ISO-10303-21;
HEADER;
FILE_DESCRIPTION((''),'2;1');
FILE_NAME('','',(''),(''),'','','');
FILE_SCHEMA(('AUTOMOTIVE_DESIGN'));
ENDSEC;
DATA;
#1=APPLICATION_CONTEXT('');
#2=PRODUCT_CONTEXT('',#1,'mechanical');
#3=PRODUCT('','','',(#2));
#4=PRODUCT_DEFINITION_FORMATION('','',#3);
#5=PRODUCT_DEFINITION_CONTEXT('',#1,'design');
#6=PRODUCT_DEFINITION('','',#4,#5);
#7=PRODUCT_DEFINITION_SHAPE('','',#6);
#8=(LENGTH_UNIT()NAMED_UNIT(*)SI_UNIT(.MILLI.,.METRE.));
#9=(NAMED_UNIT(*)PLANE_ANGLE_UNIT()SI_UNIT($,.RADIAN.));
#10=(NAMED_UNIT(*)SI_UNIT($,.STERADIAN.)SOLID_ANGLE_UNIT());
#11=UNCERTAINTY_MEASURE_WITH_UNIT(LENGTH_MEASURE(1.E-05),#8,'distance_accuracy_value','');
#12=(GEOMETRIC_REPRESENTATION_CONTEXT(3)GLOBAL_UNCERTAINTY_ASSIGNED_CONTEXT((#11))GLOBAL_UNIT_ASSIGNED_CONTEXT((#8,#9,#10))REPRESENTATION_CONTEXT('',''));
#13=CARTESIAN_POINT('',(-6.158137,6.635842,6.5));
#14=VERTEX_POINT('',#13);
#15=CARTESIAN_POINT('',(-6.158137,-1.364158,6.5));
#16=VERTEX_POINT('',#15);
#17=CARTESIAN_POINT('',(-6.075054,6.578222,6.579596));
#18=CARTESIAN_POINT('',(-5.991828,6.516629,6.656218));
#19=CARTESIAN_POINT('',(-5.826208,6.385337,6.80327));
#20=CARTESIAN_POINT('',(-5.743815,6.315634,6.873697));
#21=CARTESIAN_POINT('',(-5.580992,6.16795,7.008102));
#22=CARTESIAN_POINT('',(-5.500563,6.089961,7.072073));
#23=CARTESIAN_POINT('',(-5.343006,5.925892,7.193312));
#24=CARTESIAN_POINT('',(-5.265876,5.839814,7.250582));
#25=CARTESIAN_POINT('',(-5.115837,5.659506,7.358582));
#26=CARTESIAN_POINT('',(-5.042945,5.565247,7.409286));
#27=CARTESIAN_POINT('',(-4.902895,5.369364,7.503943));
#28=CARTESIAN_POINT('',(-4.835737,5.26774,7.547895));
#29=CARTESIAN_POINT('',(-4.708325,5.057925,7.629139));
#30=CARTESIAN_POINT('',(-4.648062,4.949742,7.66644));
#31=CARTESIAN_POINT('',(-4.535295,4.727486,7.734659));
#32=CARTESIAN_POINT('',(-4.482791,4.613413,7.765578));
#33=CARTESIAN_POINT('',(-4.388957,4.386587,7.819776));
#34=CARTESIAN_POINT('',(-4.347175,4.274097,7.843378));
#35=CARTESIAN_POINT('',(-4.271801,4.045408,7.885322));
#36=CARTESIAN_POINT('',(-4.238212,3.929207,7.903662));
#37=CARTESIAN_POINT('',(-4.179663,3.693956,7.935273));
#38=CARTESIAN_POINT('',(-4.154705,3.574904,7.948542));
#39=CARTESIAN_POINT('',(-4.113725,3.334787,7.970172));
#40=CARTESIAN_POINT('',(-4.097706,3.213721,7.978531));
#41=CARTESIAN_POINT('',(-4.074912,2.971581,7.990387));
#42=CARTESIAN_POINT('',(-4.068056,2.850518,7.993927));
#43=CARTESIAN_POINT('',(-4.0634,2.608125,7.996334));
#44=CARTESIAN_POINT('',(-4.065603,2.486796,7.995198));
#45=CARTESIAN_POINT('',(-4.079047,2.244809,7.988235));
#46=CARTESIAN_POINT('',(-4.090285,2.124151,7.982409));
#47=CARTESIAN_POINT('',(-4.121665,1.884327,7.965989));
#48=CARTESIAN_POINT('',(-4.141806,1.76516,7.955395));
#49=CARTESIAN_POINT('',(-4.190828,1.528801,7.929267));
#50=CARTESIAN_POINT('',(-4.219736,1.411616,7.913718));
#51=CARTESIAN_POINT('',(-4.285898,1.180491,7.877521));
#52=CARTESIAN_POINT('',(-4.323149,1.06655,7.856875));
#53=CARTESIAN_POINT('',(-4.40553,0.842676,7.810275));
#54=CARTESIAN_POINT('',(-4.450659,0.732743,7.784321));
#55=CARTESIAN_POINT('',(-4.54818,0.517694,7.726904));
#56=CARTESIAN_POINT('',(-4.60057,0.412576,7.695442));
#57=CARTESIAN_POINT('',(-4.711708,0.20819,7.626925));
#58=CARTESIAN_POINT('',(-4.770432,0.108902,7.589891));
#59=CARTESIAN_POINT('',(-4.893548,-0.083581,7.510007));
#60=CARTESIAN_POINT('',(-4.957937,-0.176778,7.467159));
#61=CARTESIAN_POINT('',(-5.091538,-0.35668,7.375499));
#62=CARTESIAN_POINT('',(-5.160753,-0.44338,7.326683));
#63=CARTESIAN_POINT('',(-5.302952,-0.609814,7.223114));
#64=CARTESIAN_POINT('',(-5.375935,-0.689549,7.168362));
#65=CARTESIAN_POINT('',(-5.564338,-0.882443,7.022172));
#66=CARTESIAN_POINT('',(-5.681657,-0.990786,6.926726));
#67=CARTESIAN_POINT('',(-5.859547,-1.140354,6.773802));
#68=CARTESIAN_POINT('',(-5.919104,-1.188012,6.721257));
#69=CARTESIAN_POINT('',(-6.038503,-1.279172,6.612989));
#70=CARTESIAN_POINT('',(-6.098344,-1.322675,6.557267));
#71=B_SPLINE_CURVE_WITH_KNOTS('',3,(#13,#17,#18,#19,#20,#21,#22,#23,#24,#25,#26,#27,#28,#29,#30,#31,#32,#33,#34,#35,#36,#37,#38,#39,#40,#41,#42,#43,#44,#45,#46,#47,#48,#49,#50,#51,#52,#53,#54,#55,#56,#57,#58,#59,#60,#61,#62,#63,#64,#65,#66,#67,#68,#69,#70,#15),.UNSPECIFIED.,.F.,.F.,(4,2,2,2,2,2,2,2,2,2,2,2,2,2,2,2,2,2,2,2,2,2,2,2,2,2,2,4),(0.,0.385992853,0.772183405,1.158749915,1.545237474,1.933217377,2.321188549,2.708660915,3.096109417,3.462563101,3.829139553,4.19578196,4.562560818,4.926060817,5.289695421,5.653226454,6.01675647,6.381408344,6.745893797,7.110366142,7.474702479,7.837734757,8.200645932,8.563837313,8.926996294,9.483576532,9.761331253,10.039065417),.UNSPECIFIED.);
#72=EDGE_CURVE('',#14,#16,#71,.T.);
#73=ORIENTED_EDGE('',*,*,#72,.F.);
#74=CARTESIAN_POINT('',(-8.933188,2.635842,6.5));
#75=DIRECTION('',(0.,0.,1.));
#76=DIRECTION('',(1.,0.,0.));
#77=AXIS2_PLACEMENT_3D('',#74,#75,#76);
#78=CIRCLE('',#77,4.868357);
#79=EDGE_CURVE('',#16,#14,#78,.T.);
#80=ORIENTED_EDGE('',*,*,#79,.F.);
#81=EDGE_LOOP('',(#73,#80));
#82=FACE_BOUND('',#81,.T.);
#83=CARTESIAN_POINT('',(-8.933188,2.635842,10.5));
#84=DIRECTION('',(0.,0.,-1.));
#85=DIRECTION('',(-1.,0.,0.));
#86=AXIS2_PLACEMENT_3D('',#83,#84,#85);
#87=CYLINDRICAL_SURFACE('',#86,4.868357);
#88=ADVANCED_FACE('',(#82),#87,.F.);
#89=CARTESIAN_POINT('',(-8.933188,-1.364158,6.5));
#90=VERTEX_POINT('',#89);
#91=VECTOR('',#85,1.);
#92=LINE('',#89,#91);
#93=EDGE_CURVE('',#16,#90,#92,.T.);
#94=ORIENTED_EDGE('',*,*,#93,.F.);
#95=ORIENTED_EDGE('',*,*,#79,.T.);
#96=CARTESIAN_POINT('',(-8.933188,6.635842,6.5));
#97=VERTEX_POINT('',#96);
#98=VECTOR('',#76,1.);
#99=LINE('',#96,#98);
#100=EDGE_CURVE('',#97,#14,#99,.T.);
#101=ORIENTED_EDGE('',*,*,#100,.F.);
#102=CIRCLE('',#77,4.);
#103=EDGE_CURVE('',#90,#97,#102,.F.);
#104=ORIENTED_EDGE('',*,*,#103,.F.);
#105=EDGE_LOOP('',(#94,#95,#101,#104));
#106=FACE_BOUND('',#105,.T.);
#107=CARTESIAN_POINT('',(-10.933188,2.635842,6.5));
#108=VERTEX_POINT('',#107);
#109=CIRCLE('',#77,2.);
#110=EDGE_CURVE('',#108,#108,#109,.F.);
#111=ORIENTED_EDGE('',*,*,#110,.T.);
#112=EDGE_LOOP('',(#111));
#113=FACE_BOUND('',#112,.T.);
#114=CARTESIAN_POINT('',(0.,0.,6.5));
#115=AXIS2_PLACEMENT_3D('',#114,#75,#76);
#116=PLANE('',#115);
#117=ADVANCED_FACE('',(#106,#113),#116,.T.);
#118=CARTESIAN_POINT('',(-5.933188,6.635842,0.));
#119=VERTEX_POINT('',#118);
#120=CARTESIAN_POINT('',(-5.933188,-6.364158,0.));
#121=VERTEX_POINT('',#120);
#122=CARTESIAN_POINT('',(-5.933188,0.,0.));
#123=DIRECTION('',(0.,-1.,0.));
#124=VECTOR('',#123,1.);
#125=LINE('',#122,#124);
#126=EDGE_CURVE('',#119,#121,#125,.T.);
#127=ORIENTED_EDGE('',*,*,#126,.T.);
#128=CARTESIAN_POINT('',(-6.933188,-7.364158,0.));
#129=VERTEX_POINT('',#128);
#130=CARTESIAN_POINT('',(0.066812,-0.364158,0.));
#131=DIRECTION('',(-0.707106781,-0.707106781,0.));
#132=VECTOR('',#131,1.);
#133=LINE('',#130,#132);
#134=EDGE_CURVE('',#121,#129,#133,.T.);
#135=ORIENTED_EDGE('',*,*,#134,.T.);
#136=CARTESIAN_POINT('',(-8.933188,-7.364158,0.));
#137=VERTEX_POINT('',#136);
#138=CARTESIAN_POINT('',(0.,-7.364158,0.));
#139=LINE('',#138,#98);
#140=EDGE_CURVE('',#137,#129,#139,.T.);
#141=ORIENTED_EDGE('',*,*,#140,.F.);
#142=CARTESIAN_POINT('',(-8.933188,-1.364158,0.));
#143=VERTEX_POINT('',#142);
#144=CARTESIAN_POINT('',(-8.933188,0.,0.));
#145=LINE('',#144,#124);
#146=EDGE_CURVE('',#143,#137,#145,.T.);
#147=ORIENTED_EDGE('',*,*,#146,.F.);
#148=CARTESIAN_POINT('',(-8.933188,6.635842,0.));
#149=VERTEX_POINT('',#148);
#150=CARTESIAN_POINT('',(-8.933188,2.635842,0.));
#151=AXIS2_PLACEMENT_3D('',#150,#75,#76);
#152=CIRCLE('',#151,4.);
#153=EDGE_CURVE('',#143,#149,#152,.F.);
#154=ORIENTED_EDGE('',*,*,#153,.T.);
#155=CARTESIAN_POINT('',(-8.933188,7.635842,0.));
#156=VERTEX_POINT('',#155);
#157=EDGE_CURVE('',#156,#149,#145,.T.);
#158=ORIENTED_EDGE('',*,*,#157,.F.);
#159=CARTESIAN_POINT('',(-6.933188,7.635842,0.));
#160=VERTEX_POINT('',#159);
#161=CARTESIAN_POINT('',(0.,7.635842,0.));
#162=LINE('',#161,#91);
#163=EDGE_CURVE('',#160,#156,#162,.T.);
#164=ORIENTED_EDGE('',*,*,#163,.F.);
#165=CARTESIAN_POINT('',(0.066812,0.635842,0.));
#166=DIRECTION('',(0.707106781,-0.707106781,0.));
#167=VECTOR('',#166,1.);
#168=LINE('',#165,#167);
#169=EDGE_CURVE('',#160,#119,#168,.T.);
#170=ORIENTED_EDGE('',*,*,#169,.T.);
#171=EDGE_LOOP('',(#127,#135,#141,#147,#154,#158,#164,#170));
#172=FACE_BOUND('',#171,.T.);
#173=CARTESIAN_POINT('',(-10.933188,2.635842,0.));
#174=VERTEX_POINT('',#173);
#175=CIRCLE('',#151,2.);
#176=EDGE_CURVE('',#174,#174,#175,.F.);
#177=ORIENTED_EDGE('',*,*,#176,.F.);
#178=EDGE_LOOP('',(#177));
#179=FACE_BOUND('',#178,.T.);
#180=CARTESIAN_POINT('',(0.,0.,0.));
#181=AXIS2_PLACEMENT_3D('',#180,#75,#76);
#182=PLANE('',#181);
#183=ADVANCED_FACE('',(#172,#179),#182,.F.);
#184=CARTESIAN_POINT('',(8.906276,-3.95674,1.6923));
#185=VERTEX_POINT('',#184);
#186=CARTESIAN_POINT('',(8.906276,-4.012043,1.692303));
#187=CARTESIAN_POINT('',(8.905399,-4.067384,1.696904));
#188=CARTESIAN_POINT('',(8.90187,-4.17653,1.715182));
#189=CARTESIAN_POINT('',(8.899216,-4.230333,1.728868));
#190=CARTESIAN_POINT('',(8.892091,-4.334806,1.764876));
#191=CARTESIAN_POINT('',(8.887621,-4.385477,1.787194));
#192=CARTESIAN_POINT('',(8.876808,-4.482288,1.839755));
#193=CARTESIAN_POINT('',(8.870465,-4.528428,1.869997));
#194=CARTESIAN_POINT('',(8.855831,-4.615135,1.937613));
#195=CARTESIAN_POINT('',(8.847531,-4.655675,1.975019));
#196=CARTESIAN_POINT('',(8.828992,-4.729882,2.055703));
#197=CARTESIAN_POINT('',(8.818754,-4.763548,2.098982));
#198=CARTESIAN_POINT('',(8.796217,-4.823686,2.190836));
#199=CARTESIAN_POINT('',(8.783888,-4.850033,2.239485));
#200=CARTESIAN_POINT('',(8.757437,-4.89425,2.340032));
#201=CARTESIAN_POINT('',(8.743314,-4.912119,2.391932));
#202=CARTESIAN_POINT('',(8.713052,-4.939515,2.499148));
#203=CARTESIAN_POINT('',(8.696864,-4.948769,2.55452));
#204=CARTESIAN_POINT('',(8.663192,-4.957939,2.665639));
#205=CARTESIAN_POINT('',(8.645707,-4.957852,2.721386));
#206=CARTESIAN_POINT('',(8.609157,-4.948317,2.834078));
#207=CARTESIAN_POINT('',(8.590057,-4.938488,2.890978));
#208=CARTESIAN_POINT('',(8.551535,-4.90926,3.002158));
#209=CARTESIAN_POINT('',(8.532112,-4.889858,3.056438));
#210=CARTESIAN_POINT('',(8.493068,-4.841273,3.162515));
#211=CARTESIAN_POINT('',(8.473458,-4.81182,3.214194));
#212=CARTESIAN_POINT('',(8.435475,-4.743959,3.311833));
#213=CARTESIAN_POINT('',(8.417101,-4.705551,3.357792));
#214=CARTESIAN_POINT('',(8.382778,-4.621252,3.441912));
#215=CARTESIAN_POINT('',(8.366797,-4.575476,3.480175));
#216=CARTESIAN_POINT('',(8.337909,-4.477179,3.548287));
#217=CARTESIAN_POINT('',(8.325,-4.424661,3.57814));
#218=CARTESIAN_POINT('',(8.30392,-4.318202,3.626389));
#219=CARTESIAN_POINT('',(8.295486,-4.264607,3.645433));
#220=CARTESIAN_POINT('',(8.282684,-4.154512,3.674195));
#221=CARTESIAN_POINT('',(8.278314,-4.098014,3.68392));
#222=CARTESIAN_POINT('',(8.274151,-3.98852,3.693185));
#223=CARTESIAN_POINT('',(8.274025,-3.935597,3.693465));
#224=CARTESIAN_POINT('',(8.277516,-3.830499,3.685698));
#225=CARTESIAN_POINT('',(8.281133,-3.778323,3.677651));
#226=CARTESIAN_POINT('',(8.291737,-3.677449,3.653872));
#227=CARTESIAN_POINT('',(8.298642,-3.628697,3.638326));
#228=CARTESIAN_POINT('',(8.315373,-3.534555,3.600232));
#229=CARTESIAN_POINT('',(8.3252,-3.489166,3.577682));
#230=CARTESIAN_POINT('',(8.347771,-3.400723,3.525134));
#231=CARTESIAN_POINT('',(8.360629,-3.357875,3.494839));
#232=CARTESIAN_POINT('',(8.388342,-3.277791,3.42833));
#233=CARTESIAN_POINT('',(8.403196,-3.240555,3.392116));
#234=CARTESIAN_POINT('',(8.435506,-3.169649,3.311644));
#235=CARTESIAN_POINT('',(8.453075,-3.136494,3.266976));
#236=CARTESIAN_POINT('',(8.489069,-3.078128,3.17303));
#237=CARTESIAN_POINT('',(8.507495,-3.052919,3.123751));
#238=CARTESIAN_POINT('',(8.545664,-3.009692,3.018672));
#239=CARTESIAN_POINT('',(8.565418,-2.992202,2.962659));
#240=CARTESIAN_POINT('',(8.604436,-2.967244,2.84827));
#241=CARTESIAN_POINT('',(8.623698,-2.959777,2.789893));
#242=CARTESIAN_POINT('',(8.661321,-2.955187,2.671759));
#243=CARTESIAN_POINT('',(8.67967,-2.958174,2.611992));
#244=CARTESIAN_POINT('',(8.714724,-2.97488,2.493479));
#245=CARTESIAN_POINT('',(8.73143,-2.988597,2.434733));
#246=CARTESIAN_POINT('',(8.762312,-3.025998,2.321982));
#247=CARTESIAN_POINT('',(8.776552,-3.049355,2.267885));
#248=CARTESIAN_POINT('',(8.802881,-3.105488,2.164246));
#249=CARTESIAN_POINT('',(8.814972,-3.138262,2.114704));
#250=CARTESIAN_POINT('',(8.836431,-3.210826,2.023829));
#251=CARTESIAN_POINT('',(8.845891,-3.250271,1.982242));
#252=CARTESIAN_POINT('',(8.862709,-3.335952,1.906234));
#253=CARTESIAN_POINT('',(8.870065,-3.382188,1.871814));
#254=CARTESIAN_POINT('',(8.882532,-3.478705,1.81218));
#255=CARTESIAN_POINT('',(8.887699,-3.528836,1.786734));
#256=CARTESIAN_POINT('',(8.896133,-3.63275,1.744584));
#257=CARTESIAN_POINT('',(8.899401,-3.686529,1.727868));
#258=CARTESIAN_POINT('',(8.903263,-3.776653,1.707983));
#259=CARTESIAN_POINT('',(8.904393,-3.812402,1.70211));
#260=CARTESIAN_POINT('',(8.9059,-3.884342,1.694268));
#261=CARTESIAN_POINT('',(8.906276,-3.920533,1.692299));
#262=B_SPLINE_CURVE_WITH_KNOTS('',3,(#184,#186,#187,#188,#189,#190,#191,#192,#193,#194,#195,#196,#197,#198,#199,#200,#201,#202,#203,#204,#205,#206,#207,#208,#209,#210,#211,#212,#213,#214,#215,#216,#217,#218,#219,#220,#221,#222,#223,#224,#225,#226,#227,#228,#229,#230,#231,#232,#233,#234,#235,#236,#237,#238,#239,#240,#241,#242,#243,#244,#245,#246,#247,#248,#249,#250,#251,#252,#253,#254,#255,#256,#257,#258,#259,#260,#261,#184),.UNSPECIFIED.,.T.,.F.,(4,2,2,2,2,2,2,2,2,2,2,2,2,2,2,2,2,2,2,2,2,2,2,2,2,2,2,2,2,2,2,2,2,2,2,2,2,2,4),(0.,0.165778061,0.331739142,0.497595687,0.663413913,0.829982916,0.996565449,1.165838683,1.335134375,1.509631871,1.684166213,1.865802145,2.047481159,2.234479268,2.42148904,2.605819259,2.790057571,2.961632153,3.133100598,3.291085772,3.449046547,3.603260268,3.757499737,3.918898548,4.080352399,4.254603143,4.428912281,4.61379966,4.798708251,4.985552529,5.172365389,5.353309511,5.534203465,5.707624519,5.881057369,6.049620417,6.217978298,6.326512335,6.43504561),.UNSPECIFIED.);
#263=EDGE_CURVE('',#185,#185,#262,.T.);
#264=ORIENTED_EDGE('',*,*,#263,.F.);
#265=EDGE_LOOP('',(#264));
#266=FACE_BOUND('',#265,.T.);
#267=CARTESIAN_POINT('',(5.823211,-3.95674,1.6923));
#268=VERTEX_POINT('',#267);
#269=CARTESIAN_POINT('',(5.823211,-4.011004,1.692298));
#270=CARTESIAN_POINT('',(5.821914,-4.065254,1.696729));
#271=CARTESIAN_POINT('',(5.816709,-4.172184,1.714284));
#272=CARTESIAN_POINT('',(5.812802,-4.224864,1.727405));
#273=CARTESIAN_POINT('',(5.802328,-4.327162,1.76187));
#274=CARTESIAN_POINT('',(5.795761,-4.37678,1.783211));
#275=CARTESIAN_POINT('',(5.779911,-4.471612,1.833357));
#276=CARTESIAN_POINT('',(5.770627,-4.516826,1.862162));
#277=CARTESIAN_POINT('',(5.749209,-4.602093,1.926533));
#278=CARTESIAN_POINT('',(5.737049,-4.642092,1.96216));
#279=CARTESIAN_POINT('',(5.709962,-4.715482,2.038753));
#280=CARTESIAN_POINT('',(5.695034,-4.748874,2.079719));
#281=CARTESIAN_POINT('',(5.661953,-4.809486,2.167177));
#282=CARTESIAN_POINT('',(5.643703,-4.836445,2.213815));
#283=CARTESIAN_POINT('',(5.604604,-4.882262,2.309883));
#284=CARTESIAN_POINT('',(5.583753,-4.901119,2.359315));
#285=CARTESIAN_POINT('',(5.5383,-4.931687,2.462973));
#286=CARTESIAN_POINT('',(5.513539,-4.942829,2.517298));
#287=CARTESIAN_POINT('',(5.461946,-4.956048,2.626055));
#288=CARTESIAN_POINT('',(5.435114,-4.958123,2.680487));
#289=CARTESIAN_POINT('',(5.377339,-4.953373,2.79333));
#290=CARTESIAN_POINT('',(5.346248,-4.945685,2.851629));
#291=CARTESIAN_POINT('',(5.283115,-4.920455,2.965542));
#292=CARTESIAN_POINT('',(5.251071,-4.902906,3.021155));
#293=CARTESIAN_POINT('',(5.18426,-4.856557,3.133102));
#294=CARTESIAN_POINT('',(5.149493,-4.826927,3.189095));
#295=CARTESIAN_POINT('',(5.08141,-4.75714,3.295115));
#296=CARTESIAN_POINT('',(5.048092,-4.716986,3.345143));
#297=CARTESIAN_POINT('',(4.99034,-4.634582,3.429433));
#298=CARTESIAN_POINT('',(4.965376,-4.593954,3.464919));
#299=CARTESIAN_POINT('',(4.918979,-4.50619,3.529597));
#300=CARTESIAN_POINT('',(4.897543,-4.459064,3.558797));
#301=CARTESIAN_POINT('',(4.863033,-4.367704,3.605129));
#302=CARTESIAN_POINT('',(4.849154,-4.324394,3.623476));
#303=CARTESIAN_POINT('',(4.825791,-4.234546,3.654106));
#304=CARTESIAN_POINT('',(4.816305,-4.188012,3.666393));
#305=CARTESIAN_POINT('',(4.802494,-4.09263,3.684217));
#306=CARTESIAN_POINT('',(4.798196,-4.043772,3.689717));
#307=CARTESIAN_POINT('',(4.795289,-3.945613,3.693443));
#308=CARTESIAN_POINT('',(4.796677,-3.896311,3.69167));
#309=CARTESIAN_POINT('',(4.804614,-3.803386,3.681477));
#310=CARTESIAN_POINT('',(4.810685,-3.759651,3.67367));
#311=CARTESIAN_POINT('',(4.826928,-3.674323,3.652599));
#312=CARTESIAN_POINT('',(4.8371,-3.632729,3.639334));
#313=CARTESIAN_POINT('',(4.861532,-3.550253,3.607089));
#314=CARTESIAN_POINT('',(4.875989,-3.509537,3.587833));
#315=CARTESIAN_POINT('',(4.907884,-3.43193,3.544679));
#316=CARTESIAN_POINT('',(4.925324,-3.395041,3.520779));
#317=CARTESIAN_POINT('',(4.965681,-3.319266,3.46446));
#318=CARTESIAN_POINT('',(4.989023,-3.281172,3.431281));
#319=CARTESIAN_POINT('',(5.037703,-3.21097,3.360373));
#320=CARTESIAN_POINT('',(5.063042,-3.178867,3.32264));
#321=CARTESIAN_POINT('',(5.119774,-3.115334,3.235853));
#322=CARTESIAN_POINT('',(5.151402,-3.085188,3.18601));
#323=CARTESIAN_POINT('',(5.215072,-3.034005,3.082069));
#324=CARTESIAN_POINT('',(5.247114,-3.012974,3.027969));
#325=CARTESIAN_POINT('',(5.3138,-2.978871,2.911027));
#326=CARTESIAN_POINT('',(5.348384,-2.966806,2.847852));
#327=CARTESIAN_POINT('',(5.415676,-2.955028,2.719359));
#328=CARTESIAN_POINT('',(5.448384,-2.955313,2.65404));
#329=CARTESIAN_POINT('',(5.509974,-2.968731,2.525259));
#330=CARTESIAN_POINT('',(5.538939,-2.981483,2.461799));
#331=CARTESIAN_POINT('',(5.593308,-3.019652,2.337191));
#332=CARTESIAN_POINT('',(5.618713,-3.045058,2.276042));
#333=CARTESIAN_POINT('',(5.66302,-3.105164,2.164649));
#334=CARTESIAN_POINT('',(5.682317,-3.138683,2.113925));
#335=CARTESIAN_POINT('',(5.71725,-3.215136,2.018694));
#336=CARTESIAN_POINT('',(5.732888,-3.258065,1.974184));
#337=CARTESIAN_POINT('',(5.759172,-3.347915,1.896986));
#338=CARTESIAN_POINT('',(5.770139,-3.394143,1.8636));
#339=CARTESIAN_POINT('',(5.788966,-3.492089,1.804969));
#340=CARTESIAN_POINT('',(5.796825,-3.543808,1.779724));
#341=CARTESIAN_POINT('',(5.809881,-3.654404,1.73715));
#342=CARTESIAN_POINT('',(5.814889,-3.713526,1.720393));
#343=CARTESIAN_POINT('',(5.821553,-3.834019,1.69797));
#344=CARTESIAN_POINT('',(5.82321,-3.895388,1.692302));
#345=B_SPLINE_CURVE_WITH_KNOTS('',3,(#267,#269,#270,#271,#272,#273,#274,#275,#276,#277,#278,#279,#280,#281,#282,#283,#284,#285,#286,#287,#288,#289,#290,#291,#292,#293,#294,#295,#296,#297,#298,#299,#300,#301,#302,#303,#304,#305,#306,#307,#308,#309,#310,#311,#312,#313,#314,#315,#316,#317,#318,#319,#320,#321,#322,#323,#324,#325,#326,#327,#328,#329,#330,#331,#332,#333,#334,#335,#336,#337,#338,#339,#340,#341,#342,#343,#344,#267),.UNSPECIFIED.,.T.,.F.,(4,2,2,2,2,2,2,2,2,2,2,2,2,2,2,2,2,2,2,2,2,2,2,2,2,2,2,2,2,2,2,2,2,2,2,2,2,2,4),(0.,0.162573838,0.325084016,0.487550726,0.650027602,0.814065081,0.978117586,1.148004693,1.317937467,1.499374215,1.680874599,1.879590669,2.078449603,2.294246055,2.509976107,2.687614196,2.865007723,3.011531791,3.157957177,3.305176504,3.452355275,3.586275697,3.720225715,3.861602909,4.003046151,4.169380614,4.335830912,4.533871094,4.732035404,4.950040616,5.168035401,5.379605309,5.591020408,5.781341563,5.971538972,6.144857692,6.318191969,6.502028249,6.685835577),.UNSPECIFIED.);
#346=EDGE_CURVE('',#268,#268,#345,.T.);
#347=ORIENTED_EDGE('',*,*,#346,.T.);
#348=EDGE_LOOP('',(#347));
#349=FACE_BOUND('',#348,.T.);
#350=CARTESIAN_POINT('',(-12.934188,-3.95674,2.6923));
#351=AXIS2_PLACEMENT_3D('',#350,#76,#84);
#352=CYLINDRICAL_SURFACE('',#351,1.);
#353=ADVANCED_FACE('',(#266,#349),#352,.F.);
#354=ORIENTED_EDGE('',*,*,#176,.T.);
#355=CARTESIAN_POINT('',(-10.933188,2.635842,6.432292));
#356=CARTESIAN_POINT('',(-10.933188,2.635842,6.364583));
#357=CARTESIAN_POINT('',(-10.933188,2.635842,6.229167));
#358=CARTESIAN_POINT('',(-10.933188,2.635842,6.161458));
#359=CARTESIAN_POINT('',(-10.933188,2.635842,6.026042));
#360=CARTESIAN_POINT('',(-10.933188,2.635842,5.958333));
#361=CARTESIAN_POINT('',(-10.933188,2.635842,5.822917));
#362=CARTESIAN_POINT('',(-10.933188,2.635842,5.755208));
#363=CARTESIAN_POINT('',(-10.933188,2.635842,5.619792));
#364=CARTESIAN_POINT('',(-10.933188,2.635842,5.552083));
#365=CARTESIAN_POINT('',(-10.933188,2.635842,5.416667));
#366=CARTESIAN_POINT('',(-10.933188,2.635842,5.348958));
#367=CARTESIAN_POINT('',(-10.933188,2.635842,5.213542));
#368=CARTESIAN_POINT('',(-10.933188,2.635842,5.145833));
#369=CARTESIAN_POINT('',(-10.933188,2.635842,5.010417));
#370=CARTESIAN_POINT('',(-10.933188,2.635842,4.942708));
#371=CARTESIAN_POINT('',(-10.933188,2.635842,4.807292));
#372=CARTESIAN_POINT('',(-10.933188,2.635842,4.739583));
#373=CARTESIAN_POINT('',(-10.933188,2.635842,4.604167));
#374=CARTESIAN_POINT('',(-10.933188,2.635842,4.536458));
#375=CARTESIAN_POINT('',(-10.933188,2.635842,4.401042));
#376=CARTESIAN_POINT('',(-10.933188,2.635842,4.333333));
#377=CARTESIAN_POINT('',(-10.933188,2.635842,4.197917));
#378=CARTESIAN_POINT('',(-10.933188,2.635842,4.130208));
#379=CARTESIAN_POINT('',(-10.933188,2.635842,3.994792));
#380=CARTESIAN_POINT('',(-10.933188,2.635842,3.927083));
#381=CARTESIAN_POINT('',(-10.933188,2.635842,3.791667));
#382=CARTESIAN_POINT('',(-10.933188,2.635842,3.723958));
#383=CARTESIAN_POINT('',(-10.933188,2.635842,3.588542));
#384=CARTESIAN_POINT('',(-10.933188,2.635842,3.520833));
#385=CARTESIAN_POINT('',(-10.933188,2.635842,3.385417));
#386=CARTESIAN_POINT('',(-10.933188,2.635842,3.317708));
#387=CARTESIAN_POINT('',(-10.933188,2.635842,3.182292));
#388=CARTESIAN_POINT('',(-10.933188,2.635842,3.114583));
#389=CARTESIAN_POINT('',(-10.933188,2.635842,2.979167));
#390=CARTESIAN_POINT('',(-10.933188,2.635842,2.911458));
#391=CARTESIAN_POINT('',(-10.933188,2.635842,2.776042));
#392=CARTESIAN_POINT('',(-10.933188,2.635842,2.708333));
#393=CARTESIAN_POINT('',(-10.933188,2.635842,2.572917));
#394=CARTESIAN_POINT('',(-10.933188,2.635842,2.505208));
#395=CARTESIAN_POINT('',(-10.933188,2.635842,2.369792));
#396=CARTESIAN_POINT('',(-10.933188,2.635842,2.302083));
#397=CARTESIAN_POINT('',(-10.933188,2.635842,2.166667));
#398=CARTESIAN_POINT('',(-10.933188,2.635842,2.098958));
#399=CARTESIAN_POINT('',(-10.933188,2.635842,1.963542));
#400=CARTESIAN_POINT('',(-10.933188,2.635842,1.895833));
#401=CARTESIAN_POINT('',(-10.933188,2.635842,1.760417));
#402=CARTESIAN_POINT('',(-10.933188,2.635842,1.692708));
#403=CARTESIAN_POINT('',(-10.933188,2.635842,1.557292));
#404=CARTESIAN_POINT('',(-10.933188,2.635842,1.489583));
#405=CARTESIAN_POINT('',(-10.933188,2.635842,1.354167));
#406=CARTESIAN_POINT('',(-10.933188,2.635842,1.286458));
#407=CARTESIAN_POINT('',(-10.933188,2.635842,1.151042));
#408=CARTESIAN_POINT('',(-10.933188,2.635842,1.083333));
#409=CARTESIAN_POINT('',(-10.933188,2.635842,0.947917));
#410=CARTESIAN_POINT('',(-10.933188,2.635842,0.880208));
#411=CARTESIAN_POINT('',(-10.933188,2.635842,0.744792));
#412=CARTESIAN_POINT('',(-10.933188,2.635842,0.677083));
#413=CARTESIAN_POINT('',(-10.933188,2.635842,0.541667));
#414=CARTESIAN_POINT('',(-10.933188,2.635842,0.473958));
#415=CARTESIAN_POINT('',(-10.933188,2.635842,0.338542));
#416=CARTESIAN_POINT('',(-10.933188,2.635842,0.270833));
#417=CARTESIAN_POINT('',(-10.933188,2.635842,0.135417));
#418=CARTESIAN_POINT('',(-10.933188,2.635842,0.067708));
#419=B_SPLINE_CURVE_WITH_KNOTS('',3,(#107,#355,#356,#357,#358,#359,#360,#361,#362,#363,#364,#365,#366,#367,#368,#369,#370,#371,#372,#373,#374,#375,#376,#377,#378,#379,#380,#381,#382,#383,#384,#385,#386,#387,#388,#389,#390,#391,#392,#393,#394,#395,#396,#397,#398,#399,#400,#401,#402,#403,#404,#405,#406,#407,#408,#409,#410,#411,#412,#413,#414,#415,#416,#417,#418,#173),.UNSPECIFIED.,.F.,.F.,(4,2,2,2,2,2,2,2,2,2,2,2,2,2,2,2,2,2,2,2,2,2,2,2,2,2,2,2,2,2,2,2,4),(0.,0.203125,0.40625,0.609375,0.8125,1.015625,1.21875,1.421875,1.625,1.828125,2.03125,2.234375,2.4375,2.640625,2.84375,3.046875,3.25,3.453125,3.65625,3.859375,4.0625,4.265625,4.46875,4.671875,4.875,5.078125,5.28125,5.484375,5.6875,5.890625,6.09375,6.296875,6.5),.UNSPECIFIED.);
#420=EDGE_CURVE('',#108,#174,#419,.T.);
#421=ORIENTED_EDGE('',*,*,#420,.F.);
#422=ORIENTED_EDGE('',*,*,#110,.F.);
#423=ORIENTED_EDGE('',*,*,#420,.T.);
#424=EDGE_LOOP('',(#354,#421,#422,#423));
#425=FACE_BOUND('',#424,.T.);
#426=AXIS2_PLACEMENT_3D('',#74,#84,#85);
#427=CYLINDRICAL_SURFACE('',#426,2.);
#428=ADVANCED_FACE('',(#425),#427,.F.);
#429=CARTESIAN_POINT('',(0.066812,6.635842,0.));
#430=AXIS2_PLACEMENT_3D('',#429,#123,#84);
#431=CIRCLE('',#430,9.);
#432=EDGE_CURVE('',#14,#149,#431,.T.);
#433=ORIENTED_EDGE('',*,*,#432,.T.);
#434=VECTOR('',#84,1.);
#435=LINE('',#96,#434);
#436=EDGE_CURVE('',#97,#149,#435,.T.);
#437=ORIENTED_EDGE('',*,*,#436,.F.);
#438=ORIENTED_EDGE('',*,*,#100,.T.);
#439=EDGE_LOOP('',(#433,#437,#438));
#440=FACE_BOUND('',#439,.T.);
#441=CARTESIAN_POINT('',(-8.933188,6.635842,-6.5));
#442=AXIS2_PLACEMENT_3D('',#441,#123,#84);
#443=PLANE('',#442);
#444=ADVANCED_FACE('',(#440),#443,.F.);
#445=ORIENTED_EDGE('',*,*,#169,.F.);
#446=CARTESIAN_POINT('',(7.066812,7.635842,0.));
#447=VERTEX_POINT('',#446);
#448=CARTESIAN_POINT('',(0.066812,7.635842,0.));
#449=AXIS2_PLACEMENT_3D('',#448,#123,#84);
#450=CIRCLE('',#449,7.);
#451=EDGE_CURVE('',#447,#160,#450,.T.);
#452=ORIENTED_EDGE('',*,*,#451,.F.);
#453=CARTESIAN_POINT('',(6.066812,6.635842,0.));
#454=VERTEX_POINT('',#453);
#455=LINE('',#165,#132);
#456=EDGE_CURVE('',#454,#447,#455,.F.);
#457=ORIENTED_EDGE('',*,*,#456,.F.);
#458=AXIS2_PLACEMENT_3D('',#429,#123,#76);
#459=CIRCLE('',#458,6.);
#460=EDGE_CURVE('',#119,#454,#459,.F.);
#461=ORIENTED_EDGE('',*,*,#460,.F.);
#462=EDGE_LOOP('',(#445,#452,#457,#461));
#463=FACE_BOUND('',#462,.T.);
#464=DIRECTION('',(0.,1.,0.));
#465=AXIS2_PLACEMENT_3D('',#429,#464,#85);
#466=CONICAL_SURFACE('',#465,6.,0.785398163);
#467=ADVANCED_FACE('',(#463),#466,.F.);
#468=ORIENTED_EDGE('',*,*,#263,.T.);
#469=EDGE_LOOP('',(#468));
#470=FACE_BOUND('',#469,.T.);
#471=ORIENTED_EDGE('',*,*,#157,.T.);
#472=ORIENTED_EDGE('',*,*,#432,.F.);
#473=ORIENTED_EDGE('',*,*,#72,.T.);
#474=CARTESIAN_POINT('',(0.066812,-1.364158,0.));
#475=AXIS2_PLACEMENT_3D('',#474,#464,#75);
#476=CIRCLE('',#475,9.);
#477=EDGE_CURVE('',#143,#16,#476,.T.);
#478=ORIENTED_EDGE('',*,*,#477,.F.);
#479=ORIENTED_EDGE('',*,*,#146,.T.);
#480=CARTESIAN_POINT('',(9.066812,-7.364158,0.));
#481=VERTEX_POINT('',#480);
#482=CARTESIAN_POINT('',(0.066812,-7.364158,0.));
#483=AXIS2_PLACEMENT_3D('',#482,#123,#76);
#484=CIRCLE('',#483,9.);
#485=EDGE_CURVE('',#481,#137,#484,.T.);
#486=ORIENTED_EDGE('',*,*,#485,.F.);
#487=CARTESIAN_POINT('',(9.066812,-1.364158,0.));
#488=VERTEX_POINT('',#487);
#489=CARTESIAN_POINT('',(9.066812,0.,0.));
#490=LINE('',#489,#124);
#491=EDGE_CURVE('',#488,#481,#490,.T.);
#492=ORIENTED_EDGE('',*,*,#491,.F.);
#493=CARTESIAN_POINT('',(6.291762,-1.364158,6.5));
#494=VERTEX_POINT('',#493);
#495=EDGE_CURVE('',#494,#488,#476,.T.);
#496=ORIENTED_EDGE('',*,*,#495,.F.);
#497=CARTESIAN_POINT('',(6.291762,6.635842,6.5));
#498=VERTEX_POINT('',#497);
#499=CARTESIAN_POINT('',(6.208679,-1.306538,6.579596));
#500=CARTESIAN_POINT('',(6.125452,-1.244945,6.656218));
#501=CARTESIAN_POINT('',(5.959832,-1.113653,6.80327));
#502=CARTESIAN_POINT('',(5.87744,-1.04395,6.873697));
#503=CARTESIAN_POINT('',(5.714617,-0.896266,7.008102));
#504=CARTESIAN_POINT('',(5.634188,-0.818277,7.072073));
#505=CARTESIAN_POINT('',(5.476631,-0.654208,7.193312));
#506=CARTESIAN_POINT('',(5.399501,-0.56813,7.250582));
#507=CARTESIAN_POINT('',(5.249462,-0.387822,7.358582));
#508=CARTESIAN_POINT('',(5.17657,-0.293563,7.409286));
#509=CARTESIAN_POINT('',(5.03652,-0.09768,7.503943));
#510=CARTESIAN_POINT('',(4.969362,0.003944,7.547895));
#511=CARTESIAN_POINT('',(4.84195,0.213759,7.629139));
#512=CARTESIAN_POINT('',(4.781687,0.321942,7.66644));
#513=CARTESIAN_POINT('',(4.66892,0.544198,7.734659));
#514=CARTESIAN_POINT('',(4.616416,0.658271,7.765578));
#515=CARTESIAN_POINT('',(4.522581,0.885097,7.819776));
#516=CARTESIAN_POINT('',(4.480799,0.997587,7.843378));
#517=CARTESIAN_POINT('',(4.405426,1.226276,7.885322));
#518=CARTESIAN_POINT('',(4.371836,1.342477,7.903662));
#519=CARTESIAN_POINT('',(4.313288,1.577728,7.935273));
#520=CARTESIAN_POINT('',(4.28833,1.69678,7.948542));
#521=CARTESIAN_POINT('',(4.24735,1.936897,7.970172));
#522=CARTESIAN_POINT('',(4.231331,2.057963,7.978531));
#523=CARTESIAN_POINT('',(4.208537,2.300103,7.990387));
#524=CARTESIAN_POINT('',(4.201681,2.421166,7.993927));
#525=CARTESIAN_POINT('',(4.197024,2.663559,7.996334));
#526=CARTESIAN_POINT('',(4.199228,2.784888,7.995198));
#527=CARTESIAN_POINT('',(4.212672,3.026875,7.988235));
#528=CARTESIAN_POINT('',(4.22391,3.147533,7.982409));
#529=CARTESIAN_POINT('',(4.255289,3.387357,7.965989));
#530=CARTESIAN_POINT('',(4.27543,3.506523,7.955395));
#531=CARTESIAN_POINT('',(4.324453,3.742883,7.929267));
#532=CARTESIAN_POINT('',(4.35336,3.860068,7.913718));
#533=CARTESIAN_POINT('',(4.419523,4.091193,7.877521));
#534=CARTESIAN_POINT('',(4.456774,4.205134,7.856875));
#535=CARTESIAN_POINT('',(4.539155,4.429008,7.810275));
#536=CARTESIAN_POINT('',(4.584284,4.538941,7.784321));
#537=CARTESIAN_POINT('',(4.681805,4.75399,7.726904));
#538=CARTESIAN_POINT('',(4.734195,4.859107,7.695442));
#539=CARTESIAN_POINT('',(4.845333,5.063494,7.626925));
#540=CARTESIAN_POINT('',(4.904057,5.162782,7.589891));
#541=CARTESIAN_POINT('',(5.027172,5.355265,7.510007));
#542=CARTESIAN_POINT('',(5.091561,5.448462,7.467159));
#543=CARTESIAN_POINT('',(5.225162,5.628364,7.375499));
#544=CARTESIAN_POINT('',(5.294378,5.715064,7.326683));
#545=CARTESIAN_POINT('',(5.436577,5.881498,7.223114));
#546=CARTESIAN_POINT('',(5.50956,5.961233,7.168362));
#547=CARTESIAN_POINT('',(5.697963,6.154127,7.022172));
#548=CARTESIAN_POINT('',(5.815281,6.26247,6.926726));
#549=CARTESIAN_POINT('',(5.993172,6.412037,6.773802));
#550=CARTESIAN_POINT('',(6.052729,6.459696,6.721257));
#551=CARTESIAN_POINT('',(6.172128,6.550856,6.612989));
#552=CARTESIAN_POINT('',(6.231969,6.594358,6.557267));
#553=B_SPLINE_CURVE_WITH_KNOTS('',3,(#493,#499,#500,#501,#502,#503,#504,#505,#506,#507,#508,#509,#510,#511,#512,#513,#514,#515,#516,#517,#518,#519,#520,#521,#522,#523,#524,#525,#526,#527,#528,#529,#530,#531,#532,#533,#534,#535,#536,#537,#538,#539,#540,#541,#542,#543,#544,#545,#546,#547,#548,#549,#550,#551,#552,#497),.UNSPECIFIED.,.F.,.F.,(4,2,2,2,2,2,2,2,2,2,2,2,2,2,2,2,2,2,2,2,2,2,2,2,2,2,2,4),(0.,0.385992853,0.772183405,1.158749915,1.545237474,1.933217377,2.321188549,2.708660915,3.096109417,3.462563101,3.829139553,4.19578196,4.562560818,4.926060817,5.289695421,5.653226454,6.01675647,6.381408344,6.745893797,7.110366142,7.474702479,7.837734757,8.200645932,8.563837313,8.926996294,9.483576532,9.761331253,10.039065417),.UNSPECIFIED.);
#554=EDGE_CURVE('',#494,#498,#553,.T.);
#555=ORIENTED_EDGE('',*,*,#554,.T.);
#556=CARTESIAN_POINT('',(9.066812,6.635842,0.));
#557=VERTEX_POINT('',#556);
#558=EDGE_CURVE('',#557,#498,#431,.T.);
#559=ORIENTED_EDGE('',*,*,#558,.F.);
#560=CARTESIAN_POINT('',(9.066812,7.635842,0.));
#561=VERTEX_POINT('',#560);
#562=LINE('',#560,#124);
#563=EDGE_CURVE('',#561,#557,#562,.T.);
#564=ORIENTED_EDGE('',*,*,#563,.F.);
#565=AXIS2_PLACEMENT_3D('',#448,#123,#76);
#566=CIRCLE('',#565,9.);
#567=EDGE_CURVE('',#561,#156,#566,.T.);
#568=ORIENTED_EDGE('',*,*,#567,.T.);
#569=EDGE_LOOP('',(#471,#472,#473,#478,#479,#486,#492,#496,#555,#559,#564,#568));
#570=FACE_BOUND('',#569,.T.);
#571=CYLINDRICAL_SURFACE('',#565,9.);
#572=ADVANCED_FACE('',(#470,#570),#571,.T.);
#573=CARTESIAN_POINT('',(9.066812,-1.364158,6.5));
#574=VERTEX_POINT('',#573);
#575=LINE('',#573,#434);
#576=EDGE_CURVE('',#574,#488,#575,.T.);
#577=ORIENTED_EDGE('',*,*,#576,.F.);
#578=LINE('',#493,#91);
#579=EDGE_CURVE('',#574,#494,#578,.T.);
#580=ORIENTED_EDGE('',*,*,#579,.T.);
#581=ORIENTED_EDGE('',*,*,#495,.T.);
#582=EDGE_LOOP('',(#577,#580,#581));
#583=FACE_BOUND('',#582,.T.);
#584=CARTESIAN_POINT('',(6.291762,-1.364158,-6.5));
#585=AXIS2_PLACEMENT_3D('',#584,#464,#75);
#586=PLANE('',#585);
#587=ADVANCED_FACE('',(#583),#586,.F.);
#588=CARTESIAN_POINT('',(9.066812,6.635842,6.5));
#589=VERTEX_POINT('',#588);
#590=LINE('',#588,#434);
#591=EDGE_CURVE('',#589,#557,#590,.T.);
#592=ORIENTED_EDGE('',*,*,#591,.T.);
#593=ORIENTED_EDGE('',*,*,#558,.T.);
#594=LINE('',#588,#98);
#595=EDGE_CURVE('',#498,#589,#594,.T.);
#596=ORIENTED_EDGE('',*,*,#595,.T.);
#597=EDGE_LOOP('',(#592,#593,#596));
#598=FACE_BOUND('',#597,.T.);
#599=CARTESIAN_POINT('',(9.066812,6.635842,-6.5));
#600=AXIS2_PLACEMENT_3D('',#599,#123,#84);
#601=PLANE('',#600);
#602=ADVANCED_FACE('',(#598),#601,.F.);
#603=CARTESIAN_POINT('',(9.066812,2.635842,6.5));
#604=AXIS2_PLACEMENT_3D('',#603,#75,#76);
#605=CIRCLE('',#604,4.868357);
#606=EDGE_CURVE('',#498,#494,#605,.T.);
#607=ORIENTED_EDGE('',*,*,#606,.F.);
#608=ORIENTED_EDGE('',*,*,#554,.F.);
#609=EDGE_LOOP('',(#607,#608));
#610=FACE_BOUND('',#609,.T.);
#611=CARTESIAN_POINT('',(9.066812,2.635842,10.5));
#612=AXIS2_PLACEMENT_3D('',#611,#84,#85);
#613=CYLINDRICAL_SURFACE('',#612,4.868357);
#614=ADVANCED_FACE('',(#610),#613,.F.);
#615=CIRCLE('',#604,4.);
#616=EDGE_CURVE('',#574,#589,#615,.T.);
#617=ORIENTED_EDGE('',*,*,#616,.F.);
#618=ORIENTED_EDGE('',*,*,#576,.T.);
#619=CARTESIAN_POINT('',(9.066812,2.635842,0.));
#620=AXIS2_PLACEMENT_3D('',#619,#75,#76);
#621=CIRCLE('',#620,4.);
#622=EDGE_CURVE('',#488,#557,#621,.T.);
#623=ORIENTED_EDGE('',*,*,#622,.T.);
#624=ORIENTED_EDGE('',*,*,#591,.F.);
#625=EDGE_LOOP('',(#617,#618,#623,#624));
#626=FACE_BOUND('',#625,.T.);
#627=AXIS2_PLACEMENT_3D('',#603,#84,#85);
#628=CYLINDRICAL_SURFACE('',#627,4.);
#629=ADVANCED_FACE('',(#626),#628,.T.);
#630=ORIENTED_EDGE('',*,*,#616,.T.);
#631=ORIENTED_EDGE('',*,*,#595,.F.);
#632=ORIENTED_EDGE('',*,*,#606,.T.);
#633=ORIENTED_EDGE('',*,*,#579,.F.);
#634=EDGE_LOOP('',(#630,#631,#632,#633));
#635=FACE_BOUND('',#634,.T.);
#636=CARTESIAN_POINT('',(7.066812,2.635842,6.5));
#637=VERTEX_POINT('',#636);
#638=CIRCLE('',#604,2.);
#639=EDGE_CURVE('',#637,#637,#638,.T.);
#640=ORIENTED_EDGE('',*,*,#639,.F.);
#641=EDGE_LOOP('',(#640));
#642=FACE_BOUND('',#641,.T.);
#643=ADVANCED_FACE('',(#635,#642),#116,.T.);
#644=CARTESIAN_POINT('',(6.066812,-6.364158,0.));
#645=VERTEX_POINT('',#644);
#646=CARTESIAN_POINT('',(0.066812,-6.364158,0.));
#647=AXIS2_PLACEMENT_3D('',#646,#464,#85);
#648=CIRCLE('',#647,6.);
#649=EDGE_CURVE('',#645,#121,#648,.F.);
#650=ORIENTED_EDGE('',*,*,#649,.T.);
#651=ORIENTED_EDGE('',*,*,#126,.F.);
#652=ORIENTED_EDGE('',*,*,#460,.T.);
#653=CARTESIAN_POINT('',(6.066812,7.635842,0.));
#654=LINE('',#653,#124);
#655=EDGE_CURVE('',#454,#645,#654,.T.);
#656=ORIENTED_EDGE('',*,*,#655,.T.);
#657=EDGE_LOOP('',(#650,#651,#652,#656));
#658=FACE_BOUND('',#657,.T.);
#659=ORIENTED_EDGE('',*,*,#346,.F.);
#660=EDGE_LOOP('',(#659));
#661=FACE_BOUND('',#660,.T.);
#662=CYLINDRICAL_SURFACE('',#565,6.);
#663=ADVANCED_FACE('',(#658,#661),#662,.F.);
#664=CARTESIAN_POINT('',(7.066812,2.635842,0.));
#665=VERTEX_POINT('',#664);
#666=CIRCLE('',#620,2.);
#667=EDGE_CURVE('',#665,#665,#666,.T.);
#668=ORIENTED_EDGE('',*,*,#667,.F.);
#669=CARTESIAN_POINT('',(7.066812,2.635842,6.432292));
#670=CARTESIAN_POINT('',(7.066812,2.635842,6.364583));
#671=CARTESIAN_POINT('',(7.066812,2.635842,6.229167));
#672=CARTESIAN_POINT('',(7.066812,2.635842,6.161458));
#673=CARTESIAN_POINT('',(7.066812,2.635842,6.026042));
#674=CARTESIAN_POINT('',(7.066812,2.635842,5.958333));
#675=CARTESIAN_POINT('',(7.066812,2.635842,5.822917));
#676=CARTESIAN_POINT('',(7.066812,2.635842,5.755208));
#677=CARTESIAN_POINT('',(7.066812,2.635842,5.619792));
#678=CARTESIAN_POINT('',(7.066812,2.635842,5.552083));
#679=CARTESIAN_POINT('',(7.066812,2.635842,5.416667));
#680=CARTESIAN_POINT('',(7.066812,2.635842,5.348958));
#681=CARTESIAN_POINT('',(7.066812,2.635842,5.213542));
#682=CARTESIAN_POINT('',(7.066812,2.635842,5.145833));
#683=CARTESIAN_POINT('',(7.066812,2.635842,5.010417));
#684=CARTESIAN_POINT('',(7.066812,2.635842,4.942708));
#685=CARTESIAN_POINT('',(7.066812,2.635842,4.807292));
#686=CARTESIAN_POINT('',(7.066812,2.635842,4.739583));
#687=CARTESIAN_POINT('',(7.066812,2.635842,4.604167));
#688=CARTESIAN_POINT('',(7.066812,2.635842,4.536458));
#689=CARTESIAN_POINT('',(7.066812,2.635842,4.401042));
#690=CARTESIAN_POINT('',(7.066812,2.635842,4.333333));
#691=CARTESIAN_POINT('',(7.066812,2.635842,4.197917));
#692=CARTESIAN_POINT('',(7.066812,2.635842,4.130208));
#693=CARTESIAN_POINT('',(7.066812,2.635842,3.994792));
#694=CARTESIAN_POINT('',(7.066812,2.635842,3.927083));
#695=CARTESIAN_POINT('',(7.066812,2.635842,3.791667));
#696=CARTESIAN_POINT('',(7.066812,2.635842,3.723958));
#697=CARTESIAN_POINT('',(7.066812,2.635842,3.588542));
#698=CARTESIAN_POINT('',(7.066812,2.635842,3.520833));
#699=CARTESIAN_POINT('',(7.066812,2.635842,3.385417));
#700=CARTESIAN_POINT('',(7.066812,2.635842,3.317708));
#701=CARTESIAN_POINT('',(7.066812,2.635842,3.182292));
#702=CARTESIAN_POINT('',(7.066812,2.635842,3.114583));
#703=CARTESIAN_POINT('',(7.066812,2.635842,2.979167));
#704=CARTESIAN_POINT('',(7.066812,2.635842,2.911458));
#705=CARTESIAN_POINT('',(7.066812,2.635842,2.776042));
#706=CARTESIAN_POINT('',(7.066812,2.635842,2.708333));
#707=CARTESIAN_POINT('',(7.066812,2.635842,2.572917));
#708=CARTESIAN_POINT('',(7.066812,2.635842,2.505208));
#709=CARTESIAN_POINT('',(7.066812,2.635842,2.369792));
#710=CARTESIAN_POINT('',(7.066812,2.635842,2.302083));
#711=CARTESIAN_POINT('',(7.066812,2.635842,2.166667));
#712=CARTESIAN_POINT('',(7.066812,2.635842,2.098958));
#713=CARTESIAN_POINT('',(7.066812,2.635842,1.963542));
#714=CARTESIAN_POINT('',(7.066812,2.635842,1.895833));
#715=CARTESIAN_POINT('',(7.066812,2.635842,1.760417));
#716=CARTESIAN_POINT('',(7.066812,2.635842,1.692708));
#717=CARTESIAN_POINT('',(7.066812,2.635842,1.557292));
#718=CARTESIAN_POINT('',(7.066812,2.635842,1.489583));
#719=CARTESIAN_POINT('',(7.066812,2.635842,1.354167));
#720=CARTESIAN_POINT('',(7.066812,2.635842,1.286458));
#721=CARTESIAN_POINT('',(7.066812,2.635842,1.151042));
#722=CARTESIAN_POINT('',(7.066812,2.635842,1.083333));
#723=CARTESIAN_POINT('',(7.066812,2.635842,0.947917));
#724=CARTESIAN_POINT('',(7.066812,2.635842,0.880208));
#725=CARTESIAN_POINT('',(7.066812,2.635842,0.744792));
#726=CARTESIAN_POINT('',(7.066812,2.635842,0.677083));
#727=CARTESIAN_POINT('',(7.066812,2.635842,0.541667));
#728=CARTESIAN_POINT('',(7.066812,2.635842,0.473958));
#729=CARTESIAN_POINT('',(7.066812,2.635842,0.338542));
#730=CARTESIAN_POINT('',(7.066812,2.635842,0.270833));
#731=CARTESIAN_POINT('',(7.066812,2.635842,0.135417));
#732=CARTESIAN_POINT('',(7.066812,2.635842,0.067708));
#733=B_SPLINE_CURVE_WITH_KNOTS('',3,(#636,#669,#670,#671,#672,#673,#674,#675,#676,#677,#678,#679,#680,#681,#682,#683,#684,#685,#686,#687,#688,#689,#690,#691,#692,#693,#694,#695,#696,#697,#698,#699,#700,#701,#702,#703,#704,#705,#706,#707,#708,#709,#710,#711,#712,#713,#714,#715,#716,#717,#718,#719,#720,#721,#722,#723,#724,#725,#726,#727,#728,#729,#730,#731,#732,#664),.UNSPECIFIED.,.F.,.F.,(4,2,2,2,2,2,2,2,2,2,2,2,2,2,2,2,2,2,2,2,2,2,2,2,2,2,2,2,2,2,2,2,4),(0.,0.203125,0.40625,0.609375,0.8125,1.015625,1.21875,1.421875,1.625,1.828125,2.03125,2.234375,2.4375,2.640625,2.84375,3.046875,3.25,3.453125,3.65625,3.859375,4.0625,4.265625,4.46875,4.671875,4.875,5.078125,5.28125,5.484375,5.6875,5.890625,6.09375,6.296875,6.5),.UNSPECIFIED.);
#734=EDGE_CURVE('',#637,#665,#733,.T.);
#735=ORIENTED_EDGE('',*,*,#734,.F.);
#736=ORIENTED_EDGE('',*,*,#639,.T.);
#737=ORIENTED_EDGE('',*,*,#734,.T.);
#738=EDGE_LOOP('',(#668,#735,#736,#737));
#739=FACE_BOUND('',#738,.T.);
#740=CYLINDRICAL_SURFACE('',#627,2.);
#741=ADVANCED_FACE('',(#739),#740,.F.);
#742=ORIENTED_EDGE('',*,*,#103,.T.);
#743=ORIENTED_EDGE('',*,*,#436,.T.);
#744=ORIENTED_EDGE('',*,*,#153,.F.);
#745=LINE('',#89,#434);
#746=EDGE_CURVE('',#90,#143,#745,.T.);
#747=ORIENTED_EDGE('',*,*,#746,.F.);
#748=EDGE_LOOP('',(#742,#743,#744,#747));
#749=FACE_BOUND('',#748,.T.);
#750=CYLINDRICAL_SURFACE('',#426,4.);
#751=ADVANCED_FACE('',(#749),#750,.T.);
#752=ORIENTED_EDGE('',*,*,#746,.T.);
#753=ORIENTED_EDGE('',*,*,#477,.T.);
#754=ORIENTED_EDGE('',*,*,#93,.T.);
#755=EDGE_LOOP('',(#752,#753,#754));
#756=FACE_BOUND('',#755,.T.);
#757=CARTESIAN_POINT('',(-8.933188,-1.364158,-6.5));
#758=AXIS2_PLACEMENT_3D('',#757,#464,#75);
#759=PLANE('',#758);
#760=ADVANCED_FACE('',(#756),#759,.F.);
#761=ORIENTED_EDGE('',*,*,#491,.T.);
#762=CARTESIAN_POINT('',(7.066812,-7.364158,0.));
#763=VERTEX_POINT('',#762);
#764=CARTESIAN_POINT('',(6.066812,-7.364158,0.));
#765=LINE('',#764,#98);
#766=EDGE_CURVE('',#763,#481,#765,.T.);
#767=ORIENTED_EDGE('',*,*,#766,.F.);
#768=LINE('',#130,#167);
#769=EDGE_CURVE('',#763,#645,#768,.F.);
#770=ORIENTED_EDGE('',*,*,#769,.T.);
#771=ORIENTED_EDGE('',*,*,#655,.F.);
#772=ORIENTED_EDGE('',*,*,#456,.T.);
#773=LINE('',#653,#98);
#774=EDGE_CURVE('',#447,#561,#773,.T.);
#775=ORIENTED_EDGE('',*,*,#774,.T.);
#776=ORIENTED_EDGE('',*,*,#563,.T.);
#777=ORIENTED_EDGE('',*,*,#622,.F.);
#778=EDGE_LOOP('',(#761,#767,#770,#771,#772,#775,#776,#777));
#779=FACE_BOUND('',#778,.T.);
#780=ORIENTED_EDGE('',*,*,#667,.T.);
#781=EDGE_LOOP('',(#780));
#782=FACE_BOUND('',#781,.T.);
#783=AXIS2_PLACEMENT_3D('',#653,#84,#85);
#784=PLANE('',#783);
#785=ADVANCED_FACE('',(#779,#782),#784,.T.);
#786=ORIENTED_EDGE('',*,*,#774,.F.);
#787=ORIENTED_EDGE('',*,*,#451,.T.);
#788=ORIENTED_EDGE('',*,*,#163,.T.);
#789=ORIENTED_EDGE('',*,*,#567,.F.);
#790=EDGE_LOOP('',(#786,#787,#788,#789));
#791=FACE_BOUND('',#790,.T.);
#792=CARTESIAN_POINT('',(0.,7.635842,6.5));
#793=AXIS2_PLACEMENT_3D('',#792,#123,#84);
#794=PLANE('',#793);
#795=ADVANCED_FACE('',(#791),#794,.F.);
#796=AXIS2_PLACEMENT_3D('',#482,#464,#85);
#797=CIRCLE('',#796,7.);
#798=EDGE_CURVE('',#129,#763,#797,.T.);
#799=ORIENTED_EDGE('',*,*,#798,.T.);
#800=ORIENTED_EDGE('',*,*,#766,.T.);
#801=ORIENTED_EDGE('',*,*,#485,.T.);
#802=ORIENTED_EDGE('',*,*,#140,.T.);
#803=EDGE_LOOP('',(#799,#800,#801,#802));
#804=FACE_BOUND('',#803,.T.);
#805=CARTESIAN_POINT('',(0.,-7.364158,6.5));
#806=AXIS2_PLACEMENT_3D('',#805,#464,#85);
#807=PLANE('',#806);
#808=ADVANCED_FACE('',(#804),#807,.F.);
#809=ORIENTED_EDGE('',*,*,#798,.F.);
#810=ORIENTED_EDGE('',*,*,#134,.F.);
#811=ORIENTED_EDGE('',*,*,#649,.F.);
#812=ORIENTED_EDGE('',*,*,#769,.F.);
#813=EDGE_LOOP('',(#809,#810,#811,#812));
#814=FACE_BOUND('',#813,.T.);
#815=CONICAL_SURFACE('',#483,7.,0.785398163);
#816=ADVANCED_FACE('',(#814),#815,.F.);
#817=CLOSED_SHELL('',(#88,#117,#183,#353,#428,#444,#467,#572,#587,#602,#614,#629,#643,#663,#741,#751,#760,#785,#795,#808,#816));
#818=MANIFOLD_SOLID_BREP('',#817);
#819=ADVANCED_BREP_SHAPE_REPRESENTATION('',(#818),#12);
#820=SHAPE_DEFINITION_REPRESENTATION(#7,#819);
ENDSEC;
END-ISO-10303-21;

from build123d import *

# Parameters (mm, degrees)
CROQUIS2_R                 = 2
SALIENTE_EXTRUIR1_DEPTH    = 6.5
SALIENTE_EXTRUIR1_2_DEPTH  = 6.5
SALIENTE_EXTRUIR2_DEPTH    = 15
CORTAR_EXTRUIR3_START      = -7
CROQUIS7_R                 = 2
CORTAR_EXTRUIR3_DEPTH      = 7
CORTAR_EXTRUIR5_START      = -7.364158067
CORTAR_EXTRUIR5_DEPTH      = 6
CORTAR_EXTRUIR5_START_2    = 6.635841933
CORTAR_EXTRUIR5_2_DEPTH    = 1
CROQUIS13_R                = 4.868357384
CORTAR_EXTRUIR6_DEPTH      = 4
CHAFL_N1_SIZE              = 1
CORTAR_EXTRUIR7_REACH      = 26.966
CORTAR_EXTRUIR7_END_RADIUS = 6
CROQUIS14_R                = 1


# Read off the part's stored shape, not the designer's step: Cortar-Extruir5
with BuildPart() as part:
    # Croquis2 → Saliente-Extruir1 (new body)
    with BuildSketch(Plane.XY):
        with BuildLine():
            ThreePointArc((-8.933187638, -1.364158067), (-12.933187638, 2.635841933), (-8.933187638, 6.635841933))
            Line((-8.933187638, 6.635841933), (-8.933187638, 7.635841933))
            Line((-8.933187638, 7.635841933), (-5.933187638, 7.635841933))
            Line((-5.933187638, 7.635841933), (-5.933187638, -7.364158067))
            Line((-5.933187638, -7.364158067), (-8.933187638, -7.364158067))
            Line((-8.933187638, -7.364158067), (-8.933187638, -1.364158067))
        make_face()
        with Locations(Location((-8.933187638, 2.635841933, 0), (0, 0, 180))):
            Circle(CROQUIS2_R, mode=Mode.SUBTRACT)
    extrude(amount=SALIENTE_EXTRUIR1_DEPTH)



with BuildPart() as body_2:
    # Croquis2 → Saliente-Extruir1 2 (new body)
    with BuildSketch(Plane.XY):
        with BuildLine():
            Line((9.066812362, -1.364158067), (9.066812362, -7.364158067))
            Line((9.066812362, -7.364158067), (6.066812362, -7.364158067))
            Line((6.066812362, -7.364158067), (6.066812362, 7.635841933))
            Line((6.066812362, 7.635841933), (9.066812362, 7.635841933))
            Line((9.066812362, 7.635841933), (9.066812362, 6.635841933))
            ThreePointArc((9.066812362, 6.635841933), (13.066812362, 2.635841933), (9.066812362, -1.364158067))
        make_face()
        with Locations(Location((9.066812362, 2.635841933, 0), (0, 0, 180))):
            Circle(CROQUIS2_R, mode=Mode.SUBTRACT)
    extrude(amount=SALIENTE_EXTRUIR1_2_DEPTH)


with BuildPart() as part_1:
    add(part.part)

    add(body_2.part)  # Saliente-Extruir2 merges body 2
    # Croquis3 → Saliente-Extruir2 (add, through all)
    with BuildSketch(Plane.XZ.offset(7.364158067)):
        with BuildLine():
            Line((-8.933187638, 0), (-5.933187638, 0))
            ThreePointArc((-5.933187638, 0), (0.066812362, 6), (6.066812362, 0))
            Line((6.066812362, 0), (9.066812362, 0))
            ThreePointArc((9.066812362, 0), (0.066812362, 9), (-8.933187638, 0))
        make_face()
    extrude(amount=-SALIENTE_EXTRUIR2_DEPTH)

    # Croquis7 → Cortar-Extruir3 (cut)
    with BuildSketch(Plane.XY.offset(6.5).offset(CORTAR_EXTRUIR3_START)):
        with Locations(Location((9.066812362, 2.635841933, 0), (0, 0, 180))):
            Circle(CROQUIS7_R)
        with Locations(Location((-8.933187638, 2.635841933, 0), (0, 0, 180))):
            Circle(CROQUIS7_R)
    extrude(amount=CORTAR_EXTRUIR3_DEPTH, mode=Mode.SUBTRACT)

    # Cortar-Extruir5 outline → Cortar-Extruir5 (cut)
    with BuildSketch(Plane(origin=(0, 0, 0), x_dir=(1, 0, 0), z_dir=(0, 1, 0)).offset(CORTAR_EXTRUIR5_START)):
        with BuildLine():
            Line((9.066812362, -6.5), (9.066812362, 0))
            ThreePointArc((9.066812362, 0), (8.344026513, -3.53379766), (6.291762161, -6.5))
            Line((6.291762161, -6.5), (9.066812362, -6.5))
        make_face()
        with BuildLine():
            Line((-8.933187638, -6.5), (-6.158137437, -6.5))
            ThreePointArc((-6.158137437, -6.5), (-8.210401789, -3.53379766), (-8.933187638, 0))
            Line((-8.933187638, 0), (-8.933187638, -6.5))
        make_face()
    extrude(amount=CORTAR_EXTRUIR5_DEPTH, mode=Mode.SUBTRACT)

    # Cortar-Extruir5 2 outline → Cortar-Extruir5 2 (cut)
    with BuildSketch(Plane(origin=(0, 0, 0), x_dir=(1, 0, 0), z_dir=(0, 1, 0)).offset(CORTAR_EXTRUIR5_START_2)):
        with BuildLine():
            Line((9.066812362, -6.5), (9.066812362, 0))
            ThreePointArc((9.066812362, 0), (8.344026513, -3.53379766), (6.291762161, -6.5))
            Line((6.291762161, -6.5), (9.066812362, -6.5))
        make_face()
        with BuildLine():
            Line((-8.933187638, -6.5), (-6.158137437, -6.5))
            ThreePointArc((-6.158137437, -6.5), (-8.210401789, -3.53379766), (-8.933187638, 0))
            Line((-8.933187638, 0), (-8.933187638, -6.5))
        make_face()
    extrude(amount=CORTAR_EXTRUIR5_2_DEPTH, mode=Mode.SUBTRACT)

    # Croquis13 → Cortar-Extruir6 (cut)
    with BuildSketch(Plane.XY.offset(6.5)):
        with Locations((9.066812362, 2.635841933)):
            Circle(CROQUIS13_R)
        with Locations((-8.933187638, 2.635841933)):
            Circle(CROQUIS13_R)
    extrude(amount=CORTAR_EXTRUIR6_DEPTH, mode=Mode.SUBTRACT)

    # Chaflán1
    chafl_n1_edges = [part_1.edges().sort_by_distance(p)[0] for p in [
        (0.066812362, 7.635841933, 6),
        (0.066812362, -7.364158067, 6),
    ]]
    chamfer(chafl_n1_edges, length=CHAFL_N1_SIZE)

    # Cortar-Extruir7: up to this cylinder (the profile starts outside it)
    cortar_extruir7_end = Plane(origin=(0.066812362, -3.95674, 0), z_dir=(0, -1, 0)) * Cylinder(CORTAR_EXTRUIR7_END_RADIUS, 66.932, mode=Mode.PRIVATE)
    # Croquis14 → Cortar-Extruir7 (cut, up to the surface)
    with BuildSketch(Plane(origin=(9.066812362, 0, 0), x_dir=(0, -1, 0), z_dir=(-1, 0, 0)), mode=Mode.PRIVATE) as cortar_extruir7_sk1:
        with Locations(Location((3.956739881, 2.692300291, 0), (0, 0, 270))):
            Circle(CROQUIS14_R)
    cortar_extruir7_tool1 = extrude(cortar_extruir7_sk1.sketch, amount=CORTAR_EXTRUIR7_REACH, mode=Mode.PRIVATE) - cortar_extruir7_end
    add(cortar_extruir7_tool1.solids().sort_by_distance((9.066812, -3.95674, 2.6923))[0], mode=Mode.SUBTRACT)


solid = part_1.part
